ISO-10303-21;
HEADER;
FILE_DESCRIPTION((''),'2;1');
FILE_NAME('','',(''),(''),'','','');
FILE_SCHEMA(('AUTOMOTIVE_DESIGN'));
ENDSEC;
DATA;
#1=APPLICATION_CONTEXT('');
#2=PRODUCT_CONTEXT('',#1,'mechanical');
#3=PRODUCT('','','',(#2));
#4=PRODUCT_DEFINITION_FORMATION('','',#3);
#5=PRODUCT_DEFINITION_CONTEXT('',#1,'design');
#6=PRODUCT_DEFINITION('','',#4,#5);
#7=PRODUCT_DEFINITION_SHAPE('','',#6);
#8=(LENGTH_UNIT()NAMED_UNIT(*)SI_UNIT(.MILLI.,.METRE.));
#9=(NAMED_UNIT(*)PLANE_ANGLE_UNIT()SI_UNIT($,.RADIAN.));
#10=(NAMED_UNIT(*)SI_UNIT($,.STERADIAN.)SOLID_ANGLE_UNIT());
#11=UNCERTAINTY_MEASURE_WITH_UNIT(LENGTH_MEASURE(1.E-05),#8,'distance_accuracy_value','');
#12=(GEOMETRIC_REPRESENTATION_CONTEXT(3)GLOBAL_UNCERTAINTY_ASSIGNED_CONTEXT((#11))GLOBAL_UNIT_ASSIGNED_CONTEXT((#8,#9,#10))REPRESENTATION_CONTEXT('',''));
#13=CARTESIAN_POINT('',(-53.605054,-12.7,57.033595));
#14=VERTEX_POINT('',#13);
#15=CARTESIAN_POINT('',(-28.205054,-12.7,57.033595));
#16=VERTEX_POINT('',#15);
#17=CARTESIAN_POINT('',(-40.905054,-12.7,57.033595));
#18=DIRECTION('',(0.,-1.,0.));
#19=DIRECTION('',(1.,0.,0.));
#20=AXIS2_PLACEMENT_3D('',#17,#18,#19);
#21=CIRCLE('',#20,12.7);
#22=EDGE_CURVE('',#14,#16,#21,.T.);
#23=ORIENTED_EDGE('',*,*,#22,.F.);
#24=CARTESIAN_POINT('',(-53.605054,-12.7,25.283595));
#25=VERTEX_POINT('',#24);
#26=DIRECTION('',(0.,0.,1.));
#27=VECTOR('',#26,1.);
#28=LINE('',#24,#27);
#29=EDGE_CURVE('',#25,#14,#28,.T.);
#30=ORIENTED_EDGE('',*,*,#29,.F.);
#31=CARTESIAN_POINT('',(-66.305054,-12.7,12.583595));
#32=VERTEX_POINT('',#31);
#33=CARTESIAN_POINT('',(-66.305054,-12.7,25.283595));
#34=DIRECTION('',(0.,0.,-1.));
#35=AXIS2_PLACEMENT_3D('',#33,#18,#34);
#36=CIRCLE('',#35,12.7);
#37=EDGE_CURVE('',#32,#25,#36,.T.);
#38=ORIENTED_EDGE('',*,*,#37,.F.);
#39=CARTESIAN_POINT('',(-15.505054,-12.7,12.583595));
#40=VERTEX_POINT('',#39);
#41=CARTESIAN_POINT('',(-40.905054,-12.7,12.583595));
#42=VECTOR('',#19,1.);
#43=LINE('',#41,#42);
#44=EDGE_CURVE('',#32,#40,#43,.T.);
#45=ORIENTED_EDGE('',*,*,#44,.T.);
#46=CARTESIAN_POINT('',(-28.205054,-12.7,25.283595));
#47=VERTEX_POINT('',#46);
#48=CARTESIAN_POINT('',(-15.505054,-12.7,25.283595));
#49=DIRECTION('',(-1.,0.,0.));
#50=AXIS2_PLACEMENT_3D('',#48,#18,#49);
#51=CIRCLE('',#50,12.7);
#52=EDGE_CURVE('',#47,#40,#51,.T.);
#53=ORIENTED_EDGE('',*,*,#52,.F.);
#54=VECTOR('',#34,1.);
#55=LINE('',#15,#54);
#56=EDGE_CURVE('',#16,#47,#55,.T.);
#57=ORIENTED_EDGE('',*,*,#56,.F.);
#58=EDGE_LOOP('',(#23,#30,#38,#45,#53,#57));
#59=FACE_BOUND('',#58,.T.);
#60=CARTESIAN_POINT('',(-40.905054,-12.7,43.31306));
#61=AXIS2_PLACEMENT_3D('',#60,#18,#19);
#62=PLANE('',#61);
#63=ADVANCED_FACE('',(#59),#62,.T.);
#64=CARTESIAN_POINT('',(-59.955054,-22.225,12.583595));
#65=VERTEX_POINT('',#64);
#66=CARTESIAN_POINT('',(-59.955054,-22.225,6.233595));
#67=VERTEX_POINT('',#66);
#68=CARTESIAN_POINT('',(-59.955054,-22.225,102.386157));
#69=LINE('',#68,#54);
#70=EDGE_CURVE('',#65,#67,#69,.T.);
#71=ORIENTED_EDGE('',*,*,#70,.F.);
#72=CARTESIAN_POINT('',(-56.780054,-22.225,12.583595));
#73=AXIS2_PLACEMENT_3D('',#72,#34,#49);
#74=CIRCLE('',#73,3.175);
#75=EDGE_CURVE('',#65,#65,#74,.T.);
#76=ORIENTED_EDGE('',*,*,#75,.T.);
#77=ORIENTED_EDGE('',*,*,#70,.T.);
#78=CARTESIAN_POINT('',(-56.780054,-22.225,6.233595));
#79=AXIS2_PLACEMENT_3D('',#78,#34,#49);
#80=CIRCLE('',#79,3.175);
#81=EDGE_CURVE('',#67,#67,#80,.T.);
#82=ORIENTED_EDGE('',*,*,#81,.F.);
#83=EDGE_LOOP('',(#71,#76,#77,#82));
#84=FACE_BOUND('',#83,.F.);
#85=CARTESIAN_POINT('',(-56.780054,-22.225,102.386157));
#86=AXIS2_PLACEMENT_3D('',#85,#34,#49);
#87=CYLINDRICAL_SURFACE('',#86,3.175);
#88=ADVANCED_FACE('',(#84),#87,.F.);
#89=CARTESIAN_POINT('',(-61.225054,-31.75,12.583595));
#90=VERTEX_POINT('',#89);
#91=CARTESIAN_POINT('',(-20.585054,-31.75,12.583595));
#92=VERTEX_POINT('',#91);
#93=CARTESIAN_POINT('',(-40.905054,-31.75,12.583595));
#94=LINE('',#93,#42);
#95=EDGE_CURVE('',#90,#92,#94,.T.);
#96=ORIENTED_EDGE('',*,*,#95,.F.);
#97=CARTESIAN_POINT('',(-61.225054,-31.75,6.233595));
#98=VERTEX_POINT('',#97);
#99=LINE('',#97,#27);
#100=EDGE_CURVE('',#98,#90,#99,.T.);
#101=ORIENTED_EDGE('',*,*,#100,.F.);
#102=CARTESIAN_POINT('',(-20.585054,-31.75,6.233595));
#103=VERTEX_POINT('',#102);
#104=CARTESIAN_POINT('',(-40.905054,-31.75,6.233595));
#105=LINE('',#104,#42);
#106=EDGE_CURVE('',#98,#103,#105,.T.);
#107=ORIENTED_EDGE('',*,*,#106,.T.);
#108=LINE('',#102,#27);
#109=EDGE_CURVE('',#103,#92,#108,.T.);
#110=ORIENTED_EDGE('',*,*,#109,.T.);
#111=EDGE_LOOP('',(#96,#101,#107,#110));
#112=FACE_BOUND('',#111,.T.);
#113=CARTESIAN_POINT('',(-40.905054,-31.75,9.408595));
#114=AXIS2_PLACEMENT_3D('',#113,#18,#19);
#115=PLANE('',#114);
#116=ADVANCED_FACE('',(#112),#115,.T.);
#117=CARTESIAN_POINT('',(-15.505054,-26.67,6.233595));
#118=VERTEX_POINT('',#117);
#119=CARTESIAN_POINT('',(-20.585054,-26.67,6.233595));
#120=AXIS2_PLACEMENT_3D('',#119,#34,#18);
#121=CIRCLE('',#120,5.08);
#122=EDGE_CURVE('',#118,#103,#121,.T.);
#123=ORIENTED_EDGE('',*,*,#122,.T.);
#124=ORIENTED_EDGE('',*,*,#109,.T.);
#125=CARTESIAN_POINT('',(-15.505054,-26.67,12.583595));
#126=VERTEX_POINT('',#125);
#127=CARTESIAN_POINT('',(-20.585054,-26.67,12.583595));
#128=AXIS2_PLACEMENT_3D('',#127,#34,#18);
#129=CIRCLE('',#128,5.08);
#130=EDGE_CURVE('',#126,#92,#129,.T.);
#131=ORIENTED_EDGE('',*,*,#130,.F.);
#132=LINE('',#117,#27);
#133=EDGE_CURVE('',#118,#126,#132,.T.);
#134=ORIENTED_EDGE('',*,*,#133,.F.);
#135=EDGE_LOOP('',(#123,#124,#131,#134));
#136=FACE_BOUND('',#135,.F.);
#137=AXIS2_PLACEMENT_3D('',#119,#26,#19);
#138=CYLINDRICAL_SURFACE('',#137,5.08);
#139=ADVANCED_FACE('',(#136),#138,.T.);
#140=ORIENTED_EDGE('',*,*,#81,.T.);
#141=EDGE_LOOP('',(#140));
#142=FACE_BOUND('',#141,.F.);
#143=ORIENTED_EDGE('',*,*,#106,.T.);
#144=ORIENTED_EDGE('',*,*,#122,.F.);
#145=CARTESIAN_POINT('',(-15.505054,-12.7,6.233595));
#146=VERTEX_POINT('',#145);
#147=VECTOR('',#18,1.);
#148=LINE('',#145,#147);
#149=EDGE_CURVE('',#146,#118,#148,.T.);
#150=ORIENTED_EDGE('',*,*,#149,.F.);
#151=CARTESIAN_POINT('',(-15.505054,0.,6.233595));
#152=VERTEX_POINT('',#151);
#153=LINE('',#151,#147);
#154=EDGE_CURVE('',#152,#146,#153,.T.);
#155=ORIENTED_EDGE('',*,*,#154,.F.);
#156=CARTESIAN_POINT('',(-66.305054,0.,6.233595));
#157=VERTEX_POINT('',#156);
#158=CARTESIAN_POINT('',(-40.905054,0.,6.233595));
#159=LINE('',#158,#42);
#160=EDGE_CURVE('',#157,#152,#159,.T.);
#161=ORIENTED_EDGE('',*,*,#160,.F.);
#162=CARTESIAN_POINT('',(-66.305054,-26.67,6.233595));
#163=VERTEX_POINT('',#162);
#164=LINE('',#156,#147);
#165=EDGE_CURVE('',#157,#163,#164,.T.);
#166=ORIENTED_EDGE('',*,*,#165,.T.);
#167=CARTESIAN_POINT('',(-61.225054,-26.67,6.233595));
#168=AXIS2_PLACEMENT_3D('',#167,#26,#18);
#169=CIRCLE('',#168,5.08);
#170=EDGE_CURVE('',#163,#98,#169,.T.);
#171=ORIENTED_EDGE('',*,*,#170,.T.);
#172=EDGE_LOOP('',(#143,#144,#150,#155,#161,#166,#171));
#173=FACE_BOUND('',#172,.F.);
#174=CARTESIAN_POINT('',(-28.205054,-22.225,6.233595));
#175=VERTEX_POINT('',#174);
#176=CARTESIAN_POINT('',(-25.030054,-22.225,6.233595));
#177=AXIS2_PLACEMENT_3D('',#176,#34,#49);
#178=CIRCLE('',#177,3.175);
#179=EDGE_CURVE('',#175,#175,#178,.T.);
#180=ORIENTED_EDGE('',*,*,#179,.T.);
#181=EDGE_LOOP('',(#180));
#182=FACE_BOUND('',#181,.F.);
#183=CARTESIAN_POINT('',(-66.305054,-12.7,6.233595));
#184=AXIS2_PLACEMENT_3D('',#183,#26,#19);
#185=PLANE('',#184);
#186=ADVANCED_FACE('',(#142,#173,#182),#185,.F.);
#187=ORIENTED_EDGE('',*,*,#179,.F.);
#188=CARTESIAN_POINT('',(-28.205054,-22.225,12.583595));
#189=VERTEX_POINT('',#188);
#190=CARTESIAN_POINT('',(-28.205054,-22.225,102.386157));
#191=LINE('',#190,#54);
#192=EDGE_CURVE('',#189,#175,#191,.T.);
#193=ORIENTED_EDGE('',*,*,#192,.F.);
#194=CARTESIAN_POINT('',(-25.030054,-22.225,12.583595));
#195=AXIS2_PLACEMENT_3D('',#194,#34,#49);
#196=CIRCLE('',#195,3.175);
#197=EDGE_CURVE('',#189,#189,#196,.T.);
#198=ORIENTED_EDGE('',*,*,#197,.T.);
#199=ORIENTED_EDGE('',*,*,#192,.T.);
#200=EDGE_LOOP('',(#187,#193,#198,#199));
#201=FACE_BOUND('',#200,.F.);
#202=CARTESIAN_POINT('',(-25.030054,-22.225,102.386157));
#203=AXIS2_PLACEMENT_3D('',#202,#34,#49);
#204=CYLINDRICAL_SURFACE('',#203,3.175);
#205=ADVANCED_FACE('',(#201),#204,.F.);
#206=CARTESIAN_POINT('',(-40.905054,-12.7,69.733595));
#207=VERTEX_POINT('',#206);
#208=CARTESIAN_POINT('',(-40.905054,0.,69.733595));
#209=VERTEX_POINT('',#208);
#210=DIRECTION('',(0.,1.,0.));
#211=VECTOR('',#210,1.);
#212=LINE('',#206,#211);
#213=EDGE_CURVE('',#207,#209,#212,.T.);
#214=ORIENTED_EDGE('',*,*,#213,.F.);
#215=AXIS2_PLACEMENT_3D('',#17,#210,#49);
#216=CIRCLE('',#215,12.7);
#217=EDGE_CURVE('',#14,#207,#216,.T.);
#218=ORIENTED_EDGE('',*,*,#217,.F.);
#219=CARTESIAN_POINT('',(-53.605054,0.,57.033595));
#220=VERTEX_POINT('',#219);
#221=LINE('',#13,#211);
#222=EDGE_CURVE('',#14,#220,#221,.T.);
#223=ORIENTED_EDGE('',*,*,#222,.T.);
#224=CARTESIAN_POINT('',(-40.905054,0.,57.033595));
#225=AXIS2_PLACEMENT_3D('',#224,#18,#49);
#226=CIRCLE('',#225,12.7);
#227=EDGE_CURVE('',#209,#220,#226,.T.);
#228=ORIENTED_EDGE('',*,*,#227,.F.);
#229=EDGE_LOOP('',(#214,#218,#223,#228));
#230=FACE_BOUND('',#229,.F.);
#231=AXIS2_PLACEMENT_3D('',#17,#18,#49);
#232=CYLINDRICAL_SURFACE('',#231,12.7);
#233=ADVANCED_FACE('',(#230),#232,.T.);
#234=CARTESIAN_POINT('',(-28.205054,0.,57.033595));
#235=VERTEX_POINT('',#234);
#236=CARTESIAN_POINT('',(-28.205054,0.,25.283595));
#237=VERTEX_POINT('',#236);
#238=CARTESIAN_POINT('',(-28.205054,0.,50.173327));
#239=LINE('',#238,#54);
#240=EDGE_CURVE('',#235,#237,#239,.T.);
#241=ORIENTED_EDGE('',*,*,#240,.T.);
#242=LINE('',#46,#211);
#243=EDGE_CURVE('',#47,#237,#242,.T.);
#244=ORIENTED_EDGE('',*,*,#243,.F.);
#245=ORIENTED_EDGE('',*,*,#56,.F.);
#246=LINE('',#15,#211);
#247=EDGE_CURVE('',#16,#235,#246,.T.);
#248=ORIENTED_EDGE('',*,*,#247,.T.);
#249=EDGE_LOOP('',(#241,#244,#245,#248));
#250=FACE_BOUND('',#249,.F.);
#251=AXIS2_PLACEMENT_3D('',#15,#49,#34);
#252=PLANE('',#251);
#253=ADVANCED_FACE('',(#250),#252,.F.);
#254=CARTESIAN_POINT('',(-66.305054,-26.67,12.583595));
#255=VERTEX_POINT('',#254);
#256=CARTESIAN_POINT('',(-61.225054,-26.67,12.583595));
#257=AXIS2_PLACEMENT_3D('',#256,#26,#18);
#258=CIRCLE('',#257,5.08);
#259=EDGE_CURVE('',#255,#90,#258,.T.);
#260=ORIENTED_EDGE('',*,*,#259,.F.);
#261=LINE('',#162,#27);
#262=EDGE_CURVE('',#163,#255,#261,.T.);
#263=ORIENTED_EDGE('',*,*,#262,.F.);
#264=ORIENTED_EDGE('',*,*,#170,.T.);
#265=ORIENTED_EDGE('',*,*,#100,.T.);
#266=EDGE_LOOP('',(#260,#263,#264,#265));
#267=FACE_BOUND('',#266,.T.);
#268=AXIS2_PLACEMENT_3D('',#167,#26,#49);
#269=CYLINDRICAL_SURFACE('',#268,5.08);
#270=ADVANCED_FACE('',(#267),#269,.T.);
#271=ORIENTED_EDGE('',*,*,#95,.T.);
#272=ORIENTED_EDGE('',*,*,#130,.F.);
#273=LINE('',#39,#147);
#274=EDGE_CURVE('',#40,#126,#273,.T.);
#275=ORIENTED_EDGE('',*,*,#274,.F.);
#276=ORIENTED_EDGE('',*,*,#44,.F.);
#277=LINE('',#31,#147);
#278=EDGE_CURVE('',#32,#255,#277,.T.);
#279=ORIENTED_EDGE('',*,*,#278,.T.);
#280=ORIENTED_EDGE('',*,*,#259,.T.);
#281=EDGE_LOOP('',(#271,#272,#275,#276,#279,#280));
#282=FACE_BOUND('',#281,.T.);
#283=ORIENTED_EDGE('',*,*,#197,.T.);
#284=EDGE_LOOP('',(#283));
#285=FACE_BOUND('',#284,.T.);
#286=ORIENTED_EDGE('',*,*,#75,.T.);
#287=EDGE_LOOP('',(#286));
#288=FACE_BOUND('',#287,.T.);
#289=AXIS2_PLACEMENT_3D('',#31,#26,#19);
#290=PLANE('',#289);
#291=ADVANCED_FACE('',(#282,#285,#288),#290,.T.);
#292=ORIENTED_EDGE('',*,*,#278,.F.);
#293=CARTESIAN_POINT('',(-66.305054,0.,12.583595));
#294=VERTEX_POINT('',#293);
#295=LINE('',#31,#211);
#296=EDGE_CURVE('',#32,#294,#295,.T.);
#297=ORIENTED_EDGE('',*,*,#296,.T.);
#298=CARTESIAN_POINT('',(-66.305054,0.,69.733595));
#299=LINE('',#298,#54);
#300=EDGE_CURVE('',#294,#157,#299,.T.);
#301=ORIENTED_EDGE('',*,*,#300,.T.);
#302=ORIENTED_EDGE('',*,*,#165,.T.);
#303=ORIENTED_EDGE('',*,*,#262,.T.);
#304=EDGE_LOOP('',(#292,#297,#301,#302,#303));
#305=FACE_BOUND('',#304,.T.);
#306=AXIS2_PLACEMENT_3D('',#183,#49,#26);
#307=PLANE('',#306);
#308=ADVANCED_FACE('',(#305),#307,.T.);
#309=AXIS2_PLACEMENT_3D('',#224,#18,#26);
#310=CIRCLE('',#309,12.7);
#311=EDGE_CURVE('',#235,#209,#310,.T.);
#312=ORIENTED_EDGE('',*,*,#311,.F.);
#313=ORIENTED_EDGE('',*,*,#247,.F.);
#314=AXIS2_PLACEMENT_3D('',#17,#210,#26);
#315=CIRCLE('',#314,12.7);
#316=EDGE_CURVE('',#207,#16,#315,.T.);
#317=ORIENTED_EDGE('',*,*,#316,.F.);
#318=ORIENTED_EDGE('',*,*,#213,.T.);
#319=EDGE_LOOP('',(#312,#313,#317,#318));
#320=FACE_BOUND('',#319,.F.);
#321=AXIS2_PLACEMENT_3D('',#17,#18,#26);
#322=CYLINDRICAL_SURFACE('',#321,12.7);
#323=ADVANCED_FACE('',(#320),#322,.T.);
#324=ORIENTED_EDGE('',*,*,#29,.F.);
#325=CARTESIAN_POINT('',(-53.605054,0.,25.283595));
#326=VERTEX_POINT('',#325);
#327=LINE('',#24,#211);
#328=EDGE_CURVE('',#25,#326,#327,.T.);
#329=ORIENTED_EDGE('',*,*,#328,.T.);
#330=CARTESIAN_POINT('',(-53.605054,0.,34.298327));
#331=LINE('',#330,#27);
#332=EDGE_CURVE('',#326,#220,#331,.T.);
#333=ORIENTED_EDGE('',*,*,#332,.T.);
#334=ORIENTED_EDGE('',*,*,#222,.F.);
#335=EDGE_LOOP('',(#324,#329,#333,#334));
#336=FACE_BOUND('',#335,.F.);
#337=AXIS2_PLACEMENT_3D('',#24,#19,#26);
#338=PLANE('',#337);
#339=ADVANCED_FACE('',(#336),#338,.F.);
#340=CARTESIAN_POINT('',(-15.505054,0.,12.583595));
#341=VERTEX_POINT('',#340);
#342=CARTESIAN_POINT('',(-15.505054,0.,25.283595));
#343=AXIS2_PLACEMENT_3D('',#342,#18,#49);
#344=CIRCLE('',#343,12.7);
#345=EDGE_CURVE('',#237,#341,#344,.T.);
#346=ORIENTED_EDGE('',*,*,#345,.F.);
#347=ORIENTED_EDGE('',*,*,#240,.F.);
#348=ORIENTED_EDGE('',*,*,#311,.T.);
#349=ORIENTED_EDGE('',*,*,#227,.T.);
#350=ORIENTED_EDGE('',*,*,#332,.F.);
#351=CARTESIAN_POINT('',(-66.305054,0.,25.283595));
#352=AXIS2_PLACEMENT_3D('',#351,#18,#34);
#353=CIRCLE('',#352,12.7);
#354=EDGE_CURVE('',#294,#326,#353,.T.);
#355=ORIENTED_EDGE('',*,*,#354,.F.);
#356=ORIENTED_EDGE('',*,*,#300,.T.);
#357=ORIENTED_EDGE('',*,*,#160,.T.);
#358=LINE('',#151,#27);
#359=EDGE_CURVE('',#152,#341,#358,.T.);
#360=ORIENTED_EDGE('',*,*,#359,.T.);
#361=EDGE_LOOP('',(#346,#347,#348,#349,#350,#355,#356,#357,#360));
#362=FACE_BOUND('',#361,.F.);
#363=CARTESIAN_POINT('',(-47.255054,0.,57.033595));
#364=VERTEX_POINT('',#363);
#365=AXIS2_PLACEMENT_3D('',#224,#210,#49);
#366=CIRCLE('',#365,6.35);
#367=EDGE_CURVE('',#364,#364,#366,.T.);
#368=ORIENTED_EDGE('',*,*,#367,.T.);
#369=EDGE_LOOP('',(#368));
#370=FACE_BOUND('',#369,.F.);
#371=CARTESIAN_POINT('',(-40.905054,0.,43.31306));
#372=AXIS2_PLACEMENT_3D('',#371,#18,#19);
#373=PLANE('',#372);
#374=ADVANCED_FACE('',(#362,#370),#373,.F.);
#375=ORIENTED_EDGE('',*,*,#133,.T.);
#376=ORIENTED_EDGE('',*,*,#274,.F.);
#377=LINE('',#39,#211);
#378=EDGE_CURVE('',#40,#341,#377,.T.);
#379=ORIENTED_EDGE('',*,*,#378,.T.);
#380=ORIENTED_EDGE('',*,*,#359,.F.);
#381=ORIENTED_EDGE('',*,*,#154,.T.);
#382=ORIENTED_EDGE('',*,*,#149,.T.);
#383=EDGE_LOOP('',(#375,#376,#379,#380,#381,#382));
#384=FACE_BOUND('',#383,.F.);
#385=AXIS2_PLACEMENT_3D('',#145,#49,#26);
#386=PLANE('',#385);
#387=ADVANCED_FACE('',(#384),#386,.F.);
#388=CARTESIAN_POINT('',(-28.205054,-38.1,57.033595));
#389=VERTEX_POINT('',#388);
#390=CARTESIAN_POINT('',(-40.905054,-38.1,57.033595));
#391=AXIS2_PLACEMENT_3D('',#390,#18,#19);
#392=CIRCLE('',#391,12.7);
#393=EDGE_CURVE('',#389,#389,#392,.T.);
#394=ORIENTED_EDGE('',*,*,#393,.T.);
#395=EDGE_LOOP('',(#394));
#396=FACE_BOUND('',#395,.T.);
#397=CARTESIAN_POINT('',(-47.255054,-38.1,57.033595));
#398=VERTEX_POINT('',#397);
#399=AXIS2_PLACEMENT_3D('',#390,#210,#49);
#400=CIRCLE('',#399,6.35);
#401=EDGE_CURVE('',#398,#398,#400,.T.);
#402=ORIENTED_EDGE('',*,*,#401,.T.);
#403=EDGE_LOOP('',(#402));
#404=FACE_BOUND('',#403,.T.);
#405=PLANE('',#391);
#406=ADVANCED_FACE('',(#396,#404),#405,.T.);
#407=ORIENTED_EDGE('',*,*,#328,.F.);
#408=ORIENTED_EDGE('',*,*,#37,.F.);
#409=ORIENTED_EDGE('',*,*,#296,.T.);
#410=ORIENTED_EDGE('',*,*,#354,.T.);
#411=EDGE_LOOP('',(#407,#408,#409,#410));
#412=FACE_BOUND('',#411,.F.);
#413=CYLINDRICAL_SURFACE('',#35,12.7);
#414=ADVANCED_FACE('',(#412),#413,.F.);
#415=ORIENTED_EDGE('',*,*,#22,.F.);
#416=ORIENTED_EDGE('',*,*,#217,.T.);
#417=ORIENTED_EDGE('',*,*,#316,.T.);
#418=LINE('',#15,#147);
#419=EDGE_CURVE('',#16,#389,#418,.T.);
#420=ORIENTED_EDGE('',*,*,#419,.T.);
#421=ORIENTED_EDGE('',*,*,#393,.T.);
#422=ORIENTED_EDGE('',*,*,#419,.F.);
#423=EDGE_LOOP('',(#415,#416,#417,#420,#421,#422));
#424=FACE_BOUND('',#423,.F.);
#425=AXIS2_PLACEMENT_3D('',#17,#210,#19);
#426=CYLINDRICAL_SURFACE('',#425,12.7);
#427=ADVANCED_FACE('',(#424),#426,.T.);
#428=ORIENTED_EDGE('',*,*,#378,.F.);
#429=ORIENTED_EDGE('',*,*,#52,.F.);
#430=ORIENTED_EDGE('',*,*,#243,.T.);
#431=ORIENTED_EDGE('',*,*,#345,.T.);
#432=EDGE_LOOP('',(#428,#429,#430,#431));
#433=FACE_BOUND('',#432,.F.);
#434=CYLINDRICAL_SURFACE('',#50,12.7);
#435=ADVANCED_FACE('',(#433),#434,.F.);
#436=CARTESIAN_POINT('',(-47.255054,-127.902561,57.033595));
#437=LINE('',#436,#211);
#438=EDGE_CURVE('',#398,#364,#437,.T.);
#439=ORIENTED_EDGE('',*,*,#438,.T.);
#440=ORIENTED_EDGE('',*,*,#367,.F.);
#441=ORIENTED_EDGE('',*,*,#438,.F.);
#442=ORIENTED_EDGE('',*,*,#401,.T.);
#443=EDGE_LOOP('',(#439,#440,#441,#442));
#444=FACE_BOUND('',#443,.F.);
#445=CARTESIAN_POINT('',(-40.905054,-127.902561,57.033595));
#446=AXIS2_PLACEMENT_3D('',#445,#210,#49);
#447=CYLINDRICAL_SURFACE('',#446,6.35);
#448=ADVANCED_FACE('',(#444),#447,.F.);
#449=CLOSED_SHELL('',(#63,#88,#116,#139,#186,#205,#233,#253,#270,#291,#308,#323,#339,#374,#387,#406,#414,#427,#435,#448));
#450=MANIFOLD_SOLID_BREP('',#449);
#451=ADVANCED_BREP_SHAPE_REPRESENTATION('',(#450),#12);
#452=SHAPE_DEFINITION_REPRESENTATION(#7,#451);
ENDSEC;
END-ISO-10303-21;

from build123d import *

# Parameters (mm, degrees)
F0_W     = 50.8
F0_H     = 52.8410717415
F0_H_2   = 10.6589282585
F1_DEPTH = 12.7
F2_W     = 50.8
F2_H     = 6.35
F3_DEPTH = 19.05
F5_DEPTH = 25.4
F7_DEPTH = 25.4
F9_D     = 12.7
F10_R    = 5.08
F12_D    = 6.35


with BuildPart() as f1:
    # F0 (on Front) → F1 (new body)
    with BuildSketch(Plane.XZ):
        with Locations((-40.9050544952, 43.3130595229)):
            Rectangle(F0_W, F0_H)
        with Locations((-40.9050544952, 11.5630595229)):
            Rectangle(F0_W, F0_H_2)
    extrude(amount=F1_DEPTH)

    # F2 (on face) → F3 (join)
    with BuildSketch(Plane.XZ.offset(12.7)):
        with Locations((-40.9050544952, 9.4085953936)):
            Rectangle(F2_W, F2_H)
    extrude(amount=F3_DEPTH)

    # F4 (on face) → F5 (cut)
    with BuildSketch(Plane.XZ.offset(12.7)):
        with BuildLine():
            Line((-53.6050544952, 25.2835953936), (-53.6050544952, 57.0335953936))
            ThreePointArc((-53.6050544952, 57.0335953936), (-49.8853106163, 66.0138515147), (-40.9050544952, 69.7335953936))
            Line((-40.9050544952, 69.7335953936), (-66.3050544952, 69.7335953936))
            Line((-66.3050544952, 69.7335953936), (-66.3050544952, 12.5835953936))
            ThreePointArc((-66.3050544952, 12.5835953936), (-57.3247983741, 16.3033392725), (-53.6050544952, 25.2835953936))
        make_face()
        with BuildLine():
            ThreePointArc((-40.9050544952, 69.7335953936), (-31.9247983741, 66.0138515147), (-28.2050544952, 57.0335953936))
            Line((-28.2050544952, 57.0335953936), (-28.2050544952, 25.2835953936))
            ThreePointArc((-28.2050544952, 25.2835953936), (-24.4853106163, 16.3033392725), (-15.5050544952, 12.5835953936))
            Line((-15.5050544952, 12.5835953936), (-15.5050544952, 69.7335953936))
            Line((-15.5050544952, 69.7335953936), (-40.9050544952, 69.7335953936))
        make_face()
    extrude(amount=-F5_DEPTH, mode=Mode.SUBTRACT)

    # F6 (on face) → F7 (join)
    with BuildSketch(Plane.XZ.offset(12.7)):
        with BuildLine():
            ThreePointArc((-53.6050544952, 57.0335953936), (-40.9050544952, 44.3335953936), (-28.2050544952, 57.0335953936))
            ThreePointArc((-28.2050544952, 57.0335953936), (-40.9050544952, 69.7335953936), (-53.6050544952, 57.0335953936))
        make_face()
    extrude(amount=F7_DEPTH)

    # F9 (through all)
    with Locations(Plane.XZ.offset(38.1)):
        with Locations((-40.9050544952, 57.0335953936)):
            Hole(F9_D / 2)

    # F10
    f10_edges = [f1.edges().sort_by_distance(p)[0] for p in [
        (-66.305054, -31.75, 9.408595),
        (-15.505054, -31.75, 9.408595),
    ]]
    fillet(f10_edges, radius=F10_R)

    # F12 (through all)
    with Locations(Plane.XY.offset(12.5835953936)):
        with Locations((-56.7800544952, -22.225), (-25.0300544952, -22.225)):
            Hole(F12_D / 2)


solid = f1.part
